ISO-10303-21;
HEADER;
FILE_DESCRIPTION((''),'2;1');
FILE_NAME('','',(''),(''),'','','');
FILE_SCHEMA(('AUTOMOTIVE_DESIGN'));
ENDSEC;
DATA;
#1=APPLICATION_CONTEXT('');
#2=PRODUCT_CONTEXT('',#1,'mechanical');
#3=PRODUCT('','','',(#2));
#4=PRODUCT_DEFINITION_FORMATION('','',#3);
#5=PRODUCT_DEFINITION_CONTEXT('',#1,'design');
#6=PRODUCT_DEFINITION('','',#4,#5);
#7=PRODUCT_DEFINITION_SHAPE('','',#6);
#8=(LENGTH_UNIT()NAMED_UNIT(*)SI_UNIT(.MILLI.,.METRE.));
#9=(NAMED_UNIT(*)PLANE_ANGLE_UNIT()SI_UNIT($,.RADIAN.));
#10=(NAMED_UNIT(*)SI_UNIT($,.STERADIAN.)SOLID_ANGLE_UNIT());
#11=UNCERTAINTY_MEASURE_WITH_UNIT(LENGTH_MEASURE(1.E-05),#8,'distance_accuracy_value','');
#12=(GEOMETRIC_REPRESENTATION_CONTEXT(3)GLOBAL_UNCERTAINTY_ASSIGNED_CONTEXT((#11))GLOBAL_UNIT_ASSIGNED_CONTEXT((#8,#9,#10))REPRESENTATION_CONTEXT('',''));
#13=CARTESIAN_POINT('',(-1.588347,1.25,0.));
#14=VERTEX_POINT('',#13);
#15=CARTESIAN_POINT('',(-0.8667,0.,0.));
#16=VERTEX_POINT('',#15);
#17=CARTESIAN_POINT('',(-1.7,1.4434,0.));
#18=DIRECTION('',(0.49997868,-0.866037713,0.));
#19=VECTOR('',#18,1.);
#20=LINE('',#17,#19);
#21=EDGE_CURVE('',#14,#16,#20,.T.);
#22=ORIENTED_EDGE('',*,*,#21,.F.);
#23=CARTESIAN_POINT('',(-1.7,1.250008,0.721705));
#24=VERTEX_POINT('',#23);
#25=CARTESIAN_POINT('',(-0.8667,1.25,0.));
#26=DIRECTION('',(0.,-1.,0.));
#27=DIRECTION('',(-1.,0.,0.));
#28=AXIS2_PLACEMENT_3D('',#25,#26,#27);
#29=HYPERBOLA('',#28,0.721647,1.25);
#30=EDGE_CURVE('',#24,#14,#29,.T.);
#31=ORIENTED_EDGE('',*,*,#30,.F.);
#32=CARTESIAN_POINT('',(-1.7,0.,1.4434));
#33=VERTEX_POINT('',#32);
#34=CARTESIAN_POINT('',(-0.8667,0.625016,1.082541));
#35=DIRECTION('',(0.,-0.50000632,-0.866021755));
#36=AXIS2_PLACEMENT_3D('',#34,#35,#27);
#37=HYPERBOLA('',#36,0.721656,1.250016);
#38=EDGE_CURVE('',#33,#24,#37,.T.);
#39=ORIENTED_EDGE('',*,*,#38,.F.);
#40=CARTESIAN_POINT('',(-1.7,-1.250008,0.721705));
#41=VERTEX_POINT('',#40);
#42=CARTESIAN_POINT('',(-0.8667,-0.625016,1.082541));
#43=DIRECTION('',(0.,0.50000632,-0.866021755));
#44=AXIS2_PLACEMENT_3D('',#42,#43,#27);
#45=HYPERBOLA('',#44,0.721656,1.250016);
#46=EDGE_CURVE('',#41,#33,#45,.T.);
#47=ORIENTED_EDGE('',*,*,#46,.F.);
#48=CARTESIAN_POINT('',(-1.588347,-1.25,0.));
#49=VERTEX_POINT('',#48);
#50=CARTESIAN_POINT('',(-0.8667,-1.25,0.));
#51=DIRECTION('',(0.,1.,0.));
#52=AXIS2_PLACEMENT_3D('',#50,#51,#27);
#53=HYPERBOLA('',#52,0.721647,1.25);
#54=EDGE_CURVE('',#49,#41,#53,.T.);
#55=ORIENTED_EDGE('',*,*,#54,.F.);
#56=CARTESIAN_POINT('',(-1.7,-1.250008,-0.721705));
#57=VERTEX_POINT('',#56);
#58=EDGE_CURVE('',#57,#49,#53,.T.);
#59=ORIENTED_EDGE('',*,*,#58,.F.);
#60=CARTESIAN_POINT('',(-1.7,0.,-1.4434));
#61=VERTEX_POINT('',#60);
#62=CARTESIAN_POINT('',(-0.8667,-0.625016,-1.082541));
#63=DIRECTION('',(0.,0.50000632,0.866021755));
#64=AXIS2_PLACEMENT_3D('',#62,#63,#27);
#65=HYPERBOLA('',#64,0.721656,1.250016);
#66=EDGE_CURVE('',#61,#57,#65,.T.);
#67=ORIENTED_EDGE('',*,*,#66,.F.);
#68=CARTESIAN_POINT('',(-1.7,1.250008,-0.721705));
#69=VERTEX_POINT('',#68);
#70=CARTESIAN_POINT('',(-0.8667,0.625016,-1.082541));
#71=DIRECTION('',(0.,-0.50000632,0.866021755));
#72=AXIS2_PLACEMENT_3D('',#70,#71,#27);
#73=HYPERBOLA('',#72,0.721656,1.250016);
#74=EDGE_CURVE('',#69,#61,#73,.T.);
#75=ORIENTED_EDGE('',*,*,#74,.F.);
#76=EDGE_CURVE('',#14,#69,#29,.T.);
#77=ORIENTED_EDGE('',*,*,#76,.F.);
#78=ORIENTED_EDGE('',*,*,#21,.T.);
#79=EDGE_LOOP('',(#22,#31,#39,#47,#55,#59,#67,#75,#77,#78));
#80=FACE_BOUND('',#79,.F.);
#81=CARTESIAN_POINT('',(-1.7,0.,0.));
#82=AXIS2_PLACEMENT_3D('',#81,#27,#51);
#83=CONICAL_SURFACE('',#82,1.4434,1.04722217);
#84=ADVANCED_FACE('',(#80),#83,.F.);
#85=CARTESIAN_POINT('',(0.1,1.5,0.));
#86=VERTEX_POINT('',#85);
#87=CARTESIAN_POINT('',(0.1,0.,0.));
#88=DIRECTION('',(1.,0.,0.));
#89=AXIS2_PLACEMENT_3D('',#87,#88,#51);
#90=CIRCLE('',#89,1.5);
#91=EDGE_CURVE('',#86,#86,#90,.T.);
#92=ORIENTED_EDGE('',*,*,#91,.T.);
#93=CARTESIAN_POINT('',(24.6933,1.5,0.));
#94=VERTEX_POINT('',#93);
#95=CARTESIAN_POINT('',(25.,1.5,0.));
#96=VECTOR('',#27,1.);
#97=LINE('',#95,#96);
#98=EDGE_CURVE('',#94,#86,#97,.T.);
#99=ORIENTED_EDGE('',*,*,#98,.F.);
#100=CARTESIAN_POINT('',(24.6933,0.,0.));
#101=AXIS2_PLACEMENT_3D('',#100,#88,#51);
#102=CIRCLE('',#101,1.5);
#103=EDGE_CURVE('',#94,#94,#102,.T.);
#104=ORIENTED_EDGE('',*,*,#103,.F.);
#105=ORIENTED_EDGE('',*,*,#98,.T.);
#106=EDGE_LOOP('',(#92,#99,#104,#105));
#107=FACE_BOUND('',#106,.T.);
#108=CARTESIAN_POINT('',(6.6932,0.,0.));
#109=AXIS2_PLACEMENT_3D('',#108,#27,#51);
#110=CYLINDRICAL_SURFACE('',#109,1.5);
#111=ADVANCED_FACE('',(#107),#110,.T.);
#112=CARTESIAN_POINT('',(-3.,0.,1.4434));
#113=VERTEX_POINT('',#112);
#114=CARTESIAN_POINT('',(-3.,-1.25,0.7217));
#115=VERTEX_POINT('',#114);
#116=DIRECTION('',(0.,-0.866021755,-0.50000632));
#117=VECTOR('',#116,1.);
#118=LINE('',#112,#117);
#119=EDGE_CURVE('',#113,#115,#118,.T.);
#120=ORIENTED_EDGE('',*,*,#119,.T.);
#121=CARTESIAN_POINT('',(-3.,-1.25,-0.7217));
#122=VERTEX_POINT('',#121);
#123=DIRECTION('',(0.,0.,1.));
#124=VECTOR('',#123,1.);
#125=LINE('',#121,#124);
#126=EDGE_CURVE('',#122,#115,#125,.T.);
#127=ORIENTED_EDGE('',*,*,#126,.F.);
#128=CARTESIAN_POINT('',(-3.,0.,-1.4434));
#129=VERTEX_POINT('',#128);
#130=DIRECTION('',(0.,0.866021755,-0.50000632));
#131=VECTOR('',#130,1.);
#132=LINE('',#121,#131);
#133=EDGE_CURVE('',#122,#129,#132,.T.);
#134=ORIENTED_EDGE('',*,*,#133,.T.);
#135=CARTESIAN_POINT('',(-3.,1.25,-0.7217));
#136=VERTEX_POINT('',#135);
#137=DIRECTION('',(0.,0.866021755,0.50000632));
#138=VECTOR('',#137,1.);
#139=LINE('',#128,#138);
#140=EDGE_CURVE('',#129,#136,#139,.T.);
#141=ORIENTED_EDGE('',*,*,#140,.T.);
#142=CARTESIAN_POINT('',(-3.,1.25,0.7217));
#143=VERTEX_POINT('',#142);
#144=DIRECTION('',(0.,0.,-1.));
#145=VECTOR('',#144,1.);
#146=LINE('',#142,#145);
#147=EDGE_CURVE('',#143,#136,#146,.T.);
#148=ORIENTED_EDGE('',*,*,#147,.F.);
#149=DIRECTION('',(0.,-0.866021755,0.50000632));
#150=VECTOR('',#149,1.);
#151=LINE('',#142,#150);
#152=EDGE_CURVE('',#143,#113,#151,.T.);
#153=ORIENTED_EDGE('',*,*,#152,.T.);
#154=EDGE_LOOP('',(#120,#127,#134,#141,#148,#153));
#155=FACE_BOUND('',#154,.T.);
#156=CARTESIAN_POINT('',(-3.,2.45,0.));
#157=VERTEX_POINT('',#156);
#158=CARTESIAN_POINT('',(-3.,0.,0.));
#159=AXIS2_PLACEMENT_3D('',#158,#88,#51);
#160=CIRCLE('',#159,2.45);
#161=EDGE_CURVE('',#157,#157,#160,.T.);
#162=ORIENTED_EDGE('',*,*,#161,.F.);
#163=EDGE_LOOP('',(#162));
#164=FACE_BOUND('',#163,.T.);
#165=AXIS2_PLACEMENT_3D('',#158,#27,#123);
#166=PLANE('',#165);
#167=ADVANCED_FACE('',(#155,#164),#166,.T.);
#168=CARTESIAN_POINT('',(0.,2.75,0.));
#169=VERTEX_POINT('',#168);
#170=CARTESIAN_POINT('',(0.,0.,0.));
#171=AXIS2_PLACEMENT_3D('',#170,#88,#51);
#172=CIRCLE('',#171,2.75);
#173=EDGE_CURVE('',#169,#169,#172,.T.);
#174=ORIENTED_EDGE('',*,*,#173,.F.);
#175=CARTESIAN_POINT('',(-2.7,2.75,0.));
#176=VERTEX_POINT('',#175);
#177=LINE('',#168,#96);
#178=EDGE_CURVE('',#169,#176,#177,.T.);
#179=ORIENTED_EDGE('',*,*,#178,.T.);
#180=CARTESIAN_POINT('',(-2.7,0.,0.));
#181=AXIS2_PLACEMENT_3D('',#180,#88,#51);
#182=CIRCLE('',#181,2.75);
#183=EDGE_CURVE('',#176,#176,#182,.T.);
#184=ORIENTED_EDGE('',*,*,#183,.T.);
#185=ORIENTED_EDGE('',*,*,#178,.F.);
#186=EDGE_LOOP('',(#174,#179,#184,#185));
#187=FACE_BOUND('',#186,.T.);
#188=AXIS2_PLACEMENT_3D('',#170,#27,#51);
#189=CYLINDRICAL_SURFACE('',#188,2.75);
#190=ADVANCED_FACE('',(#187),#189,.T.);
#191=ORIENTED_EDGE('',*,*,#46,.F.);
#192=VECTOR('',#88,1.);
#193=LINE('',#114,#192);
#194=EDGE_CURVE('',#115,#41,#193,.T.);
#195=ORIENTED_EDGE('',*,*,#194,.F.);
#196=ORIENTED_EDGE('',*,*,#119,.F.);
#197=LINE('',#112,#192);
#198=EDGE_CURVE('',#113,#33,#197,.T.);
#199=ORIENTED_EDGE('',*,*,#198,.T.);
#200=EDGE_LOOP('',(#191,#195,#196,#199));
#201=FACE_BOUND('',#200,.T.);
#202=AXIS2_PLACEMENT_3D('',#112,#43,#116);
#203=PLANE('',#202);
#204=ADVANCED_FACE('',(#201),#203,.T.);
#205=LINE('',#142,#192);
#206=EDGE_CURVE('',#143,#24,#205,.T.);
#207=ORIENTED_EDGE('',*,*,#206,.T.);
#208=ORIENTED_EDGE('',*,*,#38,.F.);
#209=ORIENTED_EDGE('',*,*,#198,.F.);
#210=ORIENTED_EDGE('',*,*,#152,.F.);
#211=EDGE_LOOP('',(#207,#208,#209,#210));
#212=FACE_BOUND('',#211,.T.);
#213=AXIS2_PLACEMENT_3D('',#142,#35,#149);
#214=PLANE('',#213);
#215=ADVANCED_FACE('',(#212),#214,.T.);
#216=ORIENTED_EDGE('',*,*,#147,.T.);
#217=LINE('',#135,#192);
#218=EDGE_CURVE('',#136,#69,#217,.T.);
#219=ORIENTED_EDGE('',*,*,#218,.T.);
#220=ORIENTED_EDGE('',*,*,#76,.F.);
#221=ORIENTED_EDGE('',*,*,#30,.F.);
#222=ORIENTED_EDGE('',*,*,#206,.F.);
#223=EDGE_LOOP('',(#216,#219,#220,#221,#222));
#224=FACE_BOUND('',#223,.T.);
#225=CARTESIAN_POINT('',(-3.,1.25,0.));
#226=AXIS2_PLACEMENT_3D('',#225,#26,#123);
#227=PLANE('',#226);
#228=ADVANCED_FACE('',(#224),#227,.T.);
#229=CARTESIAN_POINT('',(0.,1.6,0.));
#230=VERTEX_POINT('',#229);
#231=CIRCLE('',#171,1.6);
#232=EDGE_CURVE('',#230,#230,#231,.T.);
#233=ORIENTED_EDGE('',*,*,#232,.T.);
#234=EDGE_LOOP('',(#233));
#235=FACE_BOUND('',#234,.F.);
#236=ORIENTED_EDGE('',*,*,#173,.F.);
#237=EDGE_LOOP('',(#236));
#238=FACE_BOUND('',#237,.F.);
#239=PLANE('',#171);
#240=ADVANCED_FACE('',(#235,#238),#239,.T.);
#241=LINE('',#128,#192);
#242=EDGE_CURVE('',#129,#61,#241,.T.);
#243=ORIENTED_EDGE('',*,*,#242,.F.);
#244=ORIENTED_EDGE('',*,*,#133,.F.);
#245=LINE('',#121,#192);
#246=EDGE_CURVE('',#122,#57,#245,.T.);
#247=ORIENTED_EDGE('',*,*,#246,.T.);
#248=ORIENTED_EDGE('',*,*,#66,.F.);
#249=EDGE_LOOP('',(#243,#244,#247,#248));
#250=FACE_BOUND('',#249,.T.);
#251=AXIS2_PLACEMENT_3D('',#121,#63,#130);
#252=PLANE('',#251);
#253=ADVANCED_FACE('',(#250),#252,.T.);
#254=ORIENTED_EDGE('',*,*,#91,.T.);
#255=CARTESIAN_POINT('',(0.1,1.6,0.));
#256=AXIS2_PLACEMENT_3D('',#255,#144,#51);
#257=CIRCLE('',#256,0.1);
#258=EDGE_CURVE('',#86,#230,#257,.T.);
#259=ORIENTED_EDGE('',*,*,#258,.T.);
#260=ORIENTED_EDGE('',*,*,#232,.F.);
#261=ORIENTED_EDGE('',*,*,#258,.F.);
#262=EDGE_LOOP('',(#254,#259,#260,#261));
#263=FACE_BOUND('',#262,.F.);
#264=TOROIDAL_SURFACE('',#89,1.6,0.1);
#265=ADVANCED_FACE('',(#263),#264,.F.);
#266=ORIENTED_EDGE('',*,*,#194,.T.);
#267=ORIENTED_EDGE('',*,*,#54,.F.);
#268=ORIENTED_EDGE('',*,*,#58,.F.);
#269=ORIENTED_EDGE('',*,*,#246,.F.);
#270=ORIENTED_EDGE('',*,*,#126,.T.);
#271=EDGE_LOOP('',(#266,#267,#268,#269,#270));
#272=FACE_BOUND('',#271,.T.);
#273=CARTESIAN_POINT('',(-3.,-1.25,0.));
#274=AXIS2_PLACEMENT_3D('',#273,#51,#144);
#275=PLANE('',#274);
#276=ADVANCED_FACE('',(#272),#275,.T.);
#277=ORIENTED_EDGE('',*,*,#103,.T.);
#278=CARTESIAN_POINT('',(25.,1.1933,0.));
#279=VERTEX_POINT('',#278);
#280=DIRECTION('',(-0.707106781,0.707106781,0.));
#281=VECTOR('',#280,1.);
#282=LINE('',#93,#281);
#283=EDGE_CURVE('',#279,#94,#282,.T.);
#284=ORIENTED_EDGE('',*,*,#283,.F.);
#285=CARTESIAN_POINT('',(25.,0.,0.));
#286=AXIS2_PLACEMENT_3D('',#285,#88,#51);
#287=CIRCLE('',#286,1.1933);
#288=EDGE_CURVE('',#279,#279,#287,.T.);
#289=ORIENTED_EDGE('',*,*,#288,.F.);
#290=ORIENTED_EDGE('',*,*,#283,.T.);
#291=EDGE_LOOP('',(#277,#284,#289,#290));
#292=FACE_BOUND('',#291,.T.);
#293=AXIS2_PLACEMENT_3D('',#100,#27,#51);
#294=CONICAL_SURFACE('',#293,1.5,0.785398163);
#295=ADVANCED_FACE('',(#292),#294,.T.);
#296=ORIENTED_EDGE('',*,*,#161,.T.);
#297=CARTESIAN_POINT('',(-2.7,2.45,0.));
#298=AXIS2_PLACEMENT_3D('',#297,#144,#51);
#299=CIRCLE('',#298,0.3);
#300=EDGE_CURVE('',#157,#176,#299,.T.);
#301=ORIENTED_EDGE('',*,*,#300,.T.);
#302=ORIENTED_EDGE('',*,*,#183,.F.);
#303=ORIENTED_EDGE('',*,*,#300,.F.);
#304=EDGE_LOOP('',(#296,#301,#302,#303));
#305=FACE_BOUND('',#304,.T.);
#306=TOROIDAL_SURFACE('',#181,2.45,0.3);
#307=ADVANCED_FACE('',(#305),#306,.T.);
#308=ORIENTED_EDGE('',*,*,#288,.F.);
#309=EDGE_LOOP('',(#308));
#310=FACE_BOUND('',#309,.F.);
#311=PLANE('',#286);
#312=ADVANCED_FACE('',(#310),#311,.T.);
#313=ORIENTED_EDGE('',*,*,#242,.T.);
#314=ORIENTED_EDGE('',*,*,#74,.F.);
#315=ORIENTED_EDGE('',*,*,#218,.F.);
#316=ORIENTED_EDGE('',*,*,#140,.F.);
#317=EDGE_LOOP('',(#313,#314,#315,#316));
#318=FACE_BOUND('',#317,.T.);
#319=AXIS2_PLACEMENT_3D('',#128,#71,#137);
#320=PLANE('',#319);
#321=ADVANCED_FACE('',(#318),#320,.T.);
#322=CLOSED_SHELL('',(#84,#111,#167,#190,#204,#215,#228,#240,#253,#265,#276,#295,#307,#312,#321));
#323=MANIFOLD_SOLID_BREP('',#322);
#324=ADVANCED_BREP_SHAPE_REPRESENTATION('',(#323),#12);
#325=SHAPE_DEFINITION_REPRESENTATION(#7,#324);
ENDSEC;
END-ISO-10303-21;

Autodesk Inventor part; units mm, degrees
ref_plane "YZ Plane" through (0, 0, 0) normal (1, 0, 0) x (0, 1, 0)
ref_plane "XZ Plane" through (0, 0, 0) normal (0, 1, 0) x (-1, 0, 0)
sketch "Skizze1" plane through (0, 0, 0) normal (0, 0, 1) x (1, 0, 0)
  line L0 (-0.8667, 0) -> (25, 0)
  line L1 (25, 0) -> (25, 1.5)
  line L2 (25, 1.5) -> (7, 1.5)
  line L3 (7, 1.5) -> (6.6932, 1.5)
  line L4 (6.6932, 1.5) -> (0, 1.5)
  line L5 (0, 1.5) -> (0, 2.75)
  line L6 (0, 2.75) -> (-3, 2.75)
  line L7 (-3, 2.75) -> (-3, 1.4434)
  line L8 (-3, 1.4434) -> (-1.7, 1.4434)
  line L9 (-1.7, 1.4434) -> (-0.8667, 0)
  line L10 (-8.6, 0) -> (30.6, 0) projected
  line L11 (0, -0.55) -> (0, 3.3) projected
  line L12 (7, 1.5) -> (0, 1.5) construction
  dimension "d1" = 18
  dimension "d2" = 0.3068
  dimension "d3" = 3
  dimension "d4" = 1.3
  dimension "d5" = 60
  dimension "d6" = 3
  dimension "d7" = 3
  dimension "d8" = 2.8868
  dimension "d9" = 5.5
  dimension "d26" = 25
revolve "Körper" add sketch "Skizze1" angle 360 about axis through (-0.8667, 0, 0) along (1, 0, 0)
sketch "Skizze2" plane through (-3, 0, 0) normal (-1, 0, 0) x (0, 0, 1)
  circle A0 centre (0, 0) radius 1.4434 projected
  line L0 (0, -3.85) -> (0, 3.85) projected
  line L1 (-3.85, 0) -> (3.85, 0) projected
  line L2 (1.4434, 0) -> (0.7217, -1.25)
  line L3 (0.7217, -1.25) -> (-0.7217, -1.25)
  line L4 (-0.7217, -1.25) -> (-1.4434, 0)
  line L5 (-1.4434, 0) -> (-0.7217, 1.25)
  line L6 (-0.7217, 1.25) -> (0.7217, 1.25)
  line L7 (0.7217, 1.25) -> (1.4434, 0)
extrude "Loch" add sketch "Skizze2" against normal up to next contours L7 A0 | A0 L2 | L6 L0 A0 | A0 L0 L3 | L0 L6 A0 | A0 L3 L0 | L4 A0 | A0 L5
fillet "Rundung1" radius 0.3 1 edges at (-3, -2.75, 0)
thread "Gewinde" size "M3x0.5" class "6g" standard "ISO Metric profile" length 18
chamfer "Fase1" distance 0.3067 distance2 0.3067 1 edges at (25, -1.5, 0) measured on face at (25, 0.2885, 0.9187)
ref_plane "Work Plane1" through (29, 0, 0) normal (0, -1, 0) x (1, 0, 0)
fillet "Fillet2" radius 0.1 1 edges at (0, -1.5, 0)
equation "\"d1\" = GEL"
equation "\"d3\" = KOH"
equation "\"d4\" = INTI"
equation "\"d6\" = GD"
equation "\"d7\" = BDM"
equation "\"d8\" = 1.1547 * SW"
equation "\"d9\" = KOD"
equation "\"d26\" = NLG"
equation "\"d30\" = R"
equation "\"d17\" = RR"
equation "\"d13\" = GEL"
equation "\"d15\" = -0.5 * SPD + 0.5 * GD"
equation "\"d16\" = GUL"
equation "\"GD\" = NND"
equation "\"NLG\" = 25"
equation "\"GEL\" = 18"
equation "\"KOD\" = 5.5"
equation "\"KOH\" = 3"
equation "\"INTI\" = 1.3"
equation "\"GAL\" = 0.61345 * PTC"
equation "\"GUL\" = 0.61345 * PTC"
equation "\"BDM\" = NND"
equation "\"SW\" = 2.5"
equation "\"RR\" = 0.3"
equation "\"SPD\" = NND - 1.2269 * PTC"
equation "\"R\" = 0.1"
equation "\"TOA\" = 30deg"
equation "\"GD1\" = THREADDIA - 1.2269 * PTC"
equation "\"THREADDIA\" = 3"
equation "\"FAWI\" = 45deg"
equation "\"ANG\" = 120deg"
equation "\"PTC\" = 0.5"
equation "\"NND\" = 3"
equation "\"E0\" = 1.155 * SW"
properties part number "DIN 912 - M3 x 25" material "Stahl, weich"
